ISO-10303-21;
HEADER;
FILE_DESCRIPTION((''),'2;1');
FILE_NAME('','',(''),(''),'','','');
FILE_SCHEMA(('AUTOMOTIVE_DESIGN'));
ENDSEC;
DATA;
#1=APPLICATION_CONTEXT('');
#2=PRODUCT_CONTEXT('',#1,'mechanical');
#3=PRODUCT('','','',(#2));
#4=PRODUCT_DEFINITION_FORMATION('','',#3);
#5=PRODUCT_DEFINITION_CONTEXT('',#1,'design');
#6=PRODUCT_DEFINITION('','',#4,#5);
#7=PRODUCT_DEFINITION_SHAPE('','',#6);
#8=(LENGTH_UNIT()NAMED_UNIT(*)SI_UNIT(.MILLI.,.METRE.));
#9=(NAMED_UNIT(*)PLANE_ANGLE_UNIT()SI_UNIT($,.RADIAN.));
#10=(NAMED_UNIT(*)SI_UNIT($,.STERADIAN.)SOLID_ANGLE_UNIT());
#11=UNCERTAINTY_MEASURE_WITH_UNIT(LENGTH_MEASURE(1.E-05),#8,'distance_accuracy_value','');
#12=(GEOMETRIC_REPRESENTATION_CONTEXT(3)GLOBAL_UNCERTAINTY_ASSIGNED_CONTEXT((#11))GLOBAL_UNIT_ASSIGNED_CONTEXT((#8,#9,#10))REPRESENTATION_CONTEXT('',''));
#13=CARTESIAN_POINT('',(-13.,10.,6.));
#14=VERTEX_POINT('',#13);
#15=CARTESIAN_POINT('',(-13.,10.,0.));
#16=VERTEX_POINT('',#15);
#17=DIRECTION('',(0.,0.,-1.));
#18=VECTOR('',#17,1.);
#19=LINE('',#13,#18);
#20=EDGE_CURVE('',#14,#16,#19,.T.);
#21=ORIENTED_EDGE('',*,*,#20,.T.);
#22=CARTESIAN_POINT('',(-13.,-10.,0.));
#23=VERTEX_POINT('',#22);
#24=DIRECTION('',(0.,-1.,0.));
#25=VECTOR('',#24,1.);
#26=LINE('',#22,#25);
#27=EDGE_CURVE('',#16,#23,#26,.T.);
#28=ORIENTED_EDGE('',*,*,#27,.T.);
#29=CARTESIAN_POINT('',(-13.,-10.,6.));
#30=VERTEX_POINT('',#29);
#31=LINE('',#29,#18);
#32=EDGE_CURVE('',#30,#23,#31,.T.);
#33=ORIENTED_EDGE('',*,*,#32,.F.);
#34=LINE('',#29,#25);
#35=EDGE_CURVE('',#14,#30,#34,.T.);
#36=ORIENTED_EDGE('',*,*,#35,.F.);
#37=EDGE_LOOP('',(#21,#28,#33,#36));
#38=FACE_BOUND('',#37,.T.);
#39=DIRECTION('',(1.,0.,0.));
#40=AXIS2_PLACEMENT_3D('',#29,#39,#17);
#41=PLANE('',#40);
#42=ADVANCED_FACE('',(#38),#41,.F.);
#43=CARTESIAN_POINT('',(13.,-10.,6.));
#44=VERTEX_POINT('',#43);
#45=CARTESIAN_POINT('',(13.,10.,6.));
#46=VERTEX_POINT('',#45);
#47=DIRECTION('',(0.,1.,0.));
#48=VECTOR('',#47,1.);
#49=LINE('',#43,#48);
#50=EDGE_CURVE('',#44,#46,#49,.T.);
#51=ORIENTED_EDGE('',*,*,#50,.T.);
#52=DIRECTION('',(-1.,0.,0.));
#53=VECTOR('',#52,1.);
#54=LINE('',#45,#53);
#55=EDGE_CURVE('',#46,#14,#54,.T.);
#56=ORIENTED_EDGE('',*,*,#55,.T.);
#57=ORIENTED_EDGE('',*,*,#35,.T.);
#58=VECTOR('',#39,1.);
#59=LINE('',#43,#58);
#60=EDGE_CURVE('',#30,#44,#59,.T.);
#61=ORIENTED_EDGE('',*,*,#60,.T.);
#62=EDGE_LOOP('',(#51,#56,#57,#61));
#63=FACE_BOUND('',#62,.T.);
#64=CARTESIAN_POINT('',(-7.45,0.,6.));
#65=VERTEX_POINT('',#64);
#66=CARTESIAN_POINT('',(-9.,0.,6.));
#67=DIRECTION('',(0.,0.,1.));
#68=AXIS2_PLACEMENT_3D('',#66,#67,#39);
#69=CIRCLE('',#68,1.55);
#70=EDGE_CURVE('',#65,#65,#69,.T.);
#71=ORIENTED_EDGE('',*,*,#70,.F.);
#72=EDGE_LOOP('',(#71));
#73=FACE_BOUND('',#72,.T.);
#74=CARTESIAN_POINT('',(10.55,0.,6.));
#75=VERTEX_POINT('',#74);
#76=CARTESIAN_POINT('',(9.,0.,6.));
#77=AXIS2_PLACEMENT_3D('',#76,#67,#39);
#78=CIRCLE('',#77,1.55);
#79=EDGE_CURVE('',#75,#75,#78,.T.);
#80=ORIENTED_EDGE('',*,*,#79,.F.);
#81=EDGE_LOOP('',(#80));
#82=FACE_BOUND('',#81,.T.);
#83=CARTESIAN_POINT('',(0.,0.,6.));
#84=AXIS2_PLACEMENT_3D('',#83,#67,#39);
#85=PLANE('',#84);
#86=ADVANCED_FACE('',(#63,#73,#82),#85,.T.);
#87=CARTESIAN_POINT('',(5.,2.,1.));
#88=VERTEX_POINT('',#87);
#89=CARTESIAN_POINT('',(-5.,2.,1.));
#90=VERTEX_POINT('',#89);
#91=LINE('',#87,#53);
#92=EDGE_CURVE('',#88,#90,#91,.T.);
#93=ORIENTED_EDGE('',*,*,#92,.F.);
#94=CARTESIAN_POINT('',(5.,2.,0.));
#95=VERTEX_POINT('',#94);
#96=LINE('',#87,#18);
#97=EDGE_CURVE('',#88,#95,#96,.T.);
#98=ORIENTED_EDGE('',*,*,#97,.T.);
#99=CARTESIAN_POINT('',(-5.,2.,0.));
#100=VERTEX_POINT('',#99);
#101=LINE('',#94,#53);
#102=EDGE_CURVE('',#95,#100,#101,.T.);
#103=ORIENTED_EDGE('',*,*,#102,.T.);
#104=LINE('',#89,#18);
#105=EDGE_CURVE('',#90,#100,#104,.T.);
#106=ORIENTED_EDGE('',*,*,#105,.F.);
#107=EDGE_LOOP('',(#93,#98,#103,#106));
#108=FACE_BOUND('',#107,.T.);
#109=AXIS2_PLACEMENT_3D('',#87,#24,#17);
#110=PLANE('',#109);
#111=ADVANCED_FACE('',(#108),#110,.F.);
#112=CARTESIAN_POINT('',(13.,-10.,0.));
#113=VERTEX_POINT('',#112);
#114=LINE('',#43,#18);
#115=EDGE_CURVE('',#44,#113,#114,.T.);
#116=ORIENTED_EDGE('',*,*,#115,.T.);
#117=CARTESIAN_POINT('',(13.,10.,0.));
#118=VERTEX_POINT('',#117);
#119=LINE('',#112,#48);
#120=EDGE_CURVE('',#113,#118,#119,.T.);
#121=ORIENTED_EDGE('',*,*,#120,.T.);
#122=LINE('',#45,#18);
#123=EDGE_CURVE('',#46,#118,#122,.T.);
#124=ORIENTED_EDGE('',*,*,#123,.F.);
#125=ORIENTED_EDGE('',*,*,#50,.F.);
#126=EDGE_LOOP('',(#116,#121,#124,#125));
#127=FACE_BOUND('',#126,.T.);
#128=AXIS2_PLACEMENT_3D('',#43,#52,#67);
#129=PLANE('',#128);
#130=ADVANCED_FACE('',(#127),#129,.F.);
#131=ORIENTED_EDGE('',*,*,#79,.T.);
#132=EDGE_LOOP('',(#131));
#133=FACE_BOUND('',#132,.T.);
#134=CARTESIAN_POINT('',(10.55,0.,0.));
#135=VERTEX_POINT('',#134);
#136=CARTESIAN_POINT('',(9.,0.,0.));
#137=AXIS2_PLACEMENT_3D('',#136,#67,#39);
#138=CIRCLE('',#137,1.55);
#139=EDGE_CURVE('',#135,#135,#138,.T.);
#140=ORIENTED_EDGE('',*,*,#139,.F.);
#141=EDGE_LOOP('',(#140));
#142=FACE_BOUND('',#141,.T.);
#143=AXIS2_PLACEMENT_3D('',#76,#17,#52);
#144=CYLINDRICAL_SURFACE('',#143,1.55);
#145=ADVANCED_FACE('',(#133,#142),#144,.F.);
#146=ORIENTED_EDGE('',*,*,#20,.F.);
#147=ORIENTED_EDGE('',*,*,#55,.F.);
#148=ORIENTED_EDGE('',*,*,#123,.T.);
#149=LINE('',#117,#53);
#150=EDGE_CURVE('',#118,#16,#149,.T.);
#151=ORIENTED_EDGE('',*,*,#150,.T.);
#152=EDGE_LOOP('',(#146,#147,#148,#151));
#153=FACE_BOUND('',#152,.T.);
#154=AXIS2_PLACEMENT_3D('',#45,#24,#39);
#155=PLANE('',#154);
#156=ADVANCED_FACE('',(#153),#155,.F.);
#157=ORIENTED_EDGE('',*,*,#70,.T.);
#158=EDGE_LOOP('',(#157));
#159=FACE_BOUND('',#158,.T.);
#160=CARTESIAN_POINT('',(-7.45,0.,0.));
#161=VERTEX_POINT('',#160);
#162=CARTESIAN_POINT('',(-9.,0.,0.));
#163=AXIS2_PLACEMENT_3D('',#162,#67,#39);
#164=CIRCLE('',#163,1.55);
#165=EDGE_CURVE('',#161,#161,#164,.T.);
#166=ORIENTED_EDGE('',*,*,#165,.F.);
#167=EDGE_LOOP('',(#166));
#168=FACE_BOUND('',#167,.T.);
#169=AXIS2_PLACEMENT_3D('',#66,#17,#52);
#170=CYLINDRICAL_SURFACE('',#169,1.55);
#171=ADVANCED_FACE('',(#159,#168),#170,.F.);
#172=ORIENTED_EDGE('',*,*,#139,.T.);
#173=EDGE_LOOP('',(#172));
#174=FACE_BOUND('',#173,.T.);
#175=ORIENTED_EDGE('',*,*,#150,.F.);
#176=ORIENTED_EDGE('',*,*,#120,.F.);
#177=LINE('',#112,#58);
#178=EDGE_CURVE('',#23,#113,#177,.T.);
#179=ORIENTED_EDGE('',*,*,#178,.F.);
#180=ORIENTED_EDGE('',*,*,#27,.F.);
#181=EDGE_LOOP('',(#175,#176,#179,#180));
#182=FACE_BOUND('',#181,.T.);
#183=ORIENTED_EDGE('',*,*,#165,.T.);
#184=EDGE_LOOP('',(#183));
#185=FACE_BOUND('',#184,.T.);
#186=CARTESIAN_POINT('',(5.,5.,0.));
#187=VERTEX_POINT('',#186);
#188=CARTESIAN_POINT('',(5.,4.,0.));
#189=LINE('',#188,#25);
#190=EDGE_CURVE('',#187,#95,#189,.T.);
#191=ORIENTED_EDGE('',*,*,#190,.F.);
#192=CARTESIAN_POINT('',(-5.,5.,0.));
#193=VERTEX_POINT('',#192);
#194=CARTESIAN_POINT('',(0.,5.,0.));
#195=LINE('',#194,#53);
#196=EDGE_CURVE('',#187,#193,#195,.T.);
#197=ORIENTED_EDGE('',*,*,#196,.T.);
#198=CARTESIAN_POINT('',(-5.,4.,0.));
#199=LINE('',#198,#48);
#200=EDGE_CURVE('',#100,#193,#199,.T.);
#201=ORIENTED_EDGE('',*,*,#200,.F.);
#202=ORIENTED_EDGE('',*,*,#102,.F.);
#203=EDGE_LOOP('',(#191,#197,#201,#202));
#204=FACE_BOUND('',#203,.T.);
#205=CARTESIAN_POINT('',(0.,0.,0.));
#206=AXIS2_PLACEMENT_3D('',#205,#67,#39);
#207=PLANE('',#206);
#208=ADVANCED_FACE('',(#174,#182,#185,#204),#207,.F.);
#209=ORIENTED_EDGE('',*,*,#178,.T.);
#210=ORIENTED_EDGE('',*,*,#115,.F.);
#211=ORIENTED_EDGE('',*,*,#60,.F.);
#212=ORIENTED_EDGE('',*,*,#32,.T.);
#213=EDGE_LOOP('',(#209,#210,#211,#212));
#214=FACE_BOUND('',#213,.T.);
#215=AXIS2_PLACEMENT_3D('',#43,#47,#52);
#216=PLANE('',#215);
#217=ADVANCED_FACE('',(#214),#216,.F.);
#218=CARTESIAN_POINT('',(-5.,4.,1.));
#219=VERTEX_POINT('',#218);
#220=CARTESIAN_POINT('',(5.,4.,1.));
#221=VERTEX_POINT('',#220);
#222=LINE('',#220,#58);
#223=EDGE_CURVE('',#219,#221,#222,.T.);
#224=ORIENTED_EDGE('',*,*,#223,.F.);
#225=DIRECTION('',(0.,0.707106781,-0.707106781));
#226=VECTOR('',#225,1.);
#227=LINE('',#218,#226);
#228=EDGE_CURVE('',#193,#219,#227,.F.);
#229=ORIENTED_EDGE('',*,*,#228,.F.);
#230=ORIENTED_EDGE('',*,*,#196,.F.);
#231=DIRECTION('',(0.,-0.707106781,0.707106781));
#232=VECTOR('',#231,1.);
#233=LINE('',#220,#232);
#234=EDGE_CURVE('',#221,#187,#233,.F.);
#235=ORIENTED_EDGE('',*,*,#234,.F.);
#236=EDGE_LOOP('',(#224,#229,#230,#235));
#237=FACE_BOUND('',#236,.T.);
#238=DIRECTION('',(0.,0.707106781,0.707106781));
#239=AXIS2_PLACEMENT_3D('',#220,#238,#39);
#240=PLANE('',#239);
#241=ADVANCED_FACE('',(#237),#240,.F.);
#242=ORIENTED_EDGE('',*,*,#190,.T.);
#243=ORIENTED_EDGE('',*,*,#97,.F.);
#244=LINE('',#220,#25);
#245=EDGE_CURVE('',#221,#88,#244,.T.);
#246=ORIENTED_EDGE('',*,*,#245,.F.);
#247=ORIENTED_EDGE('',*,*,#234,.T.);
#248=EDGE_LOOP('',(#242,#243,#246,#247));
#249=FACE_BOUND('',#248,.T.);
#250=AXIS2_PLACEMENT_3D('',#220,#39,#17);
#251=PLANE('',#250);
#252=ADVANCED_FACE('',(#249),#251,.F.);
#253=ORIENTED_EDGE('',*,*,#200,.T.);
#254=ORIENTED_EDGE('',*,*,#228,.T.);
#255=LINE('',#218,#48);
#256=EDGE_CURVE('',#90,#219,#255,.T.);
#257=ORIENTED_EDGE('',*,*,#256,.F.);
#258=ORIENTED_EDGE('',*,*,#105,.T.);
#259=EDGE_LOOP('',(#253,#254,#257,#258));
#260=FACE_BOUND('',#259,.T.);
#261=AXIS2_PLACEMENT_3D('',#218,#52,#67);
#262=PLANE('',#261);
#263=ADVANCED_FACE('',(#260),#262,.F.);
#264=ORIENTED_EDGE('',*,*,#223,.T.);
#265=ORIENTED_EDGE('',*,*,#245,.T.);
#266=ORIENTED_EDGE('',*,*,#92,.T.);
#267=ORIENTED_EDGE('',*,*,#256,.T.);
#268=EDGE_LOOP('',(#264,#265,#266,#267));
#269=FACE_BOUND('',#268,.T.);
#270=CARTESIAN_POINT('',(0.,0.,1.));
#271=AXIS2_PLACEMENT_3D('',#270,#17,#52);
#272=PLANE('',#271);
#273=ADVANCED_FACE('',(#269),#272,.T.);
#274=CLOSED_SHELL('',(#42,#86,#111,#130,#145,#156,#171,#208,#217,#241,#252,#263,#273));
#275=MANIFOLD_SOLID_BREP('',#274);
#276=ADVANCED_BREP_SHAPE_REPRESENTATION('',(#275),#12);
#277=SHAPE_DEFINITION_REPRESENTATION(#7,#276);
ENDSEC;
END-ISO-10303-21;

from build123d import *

# Parameters (mm, degrees)
SKETCH1_W           = 26
SKETCH1_H           = 20
SKETCH1_R           = 1.55
BOSS_EXTRUDE1_DEPTH = 6
SKETCH4_W           = 10
SKETCH4_H           = 2
CUT_EXTRUDE3_DEPTH  = 1
CHAMFER1_SIZE       = 1


with BuildPart() as part:
    # Sketch1 → Boss-Extrude1 (new body)
    with BuildSketch(Plane.XY):
        Rectangle(SKETCH1_W, SKETCH1_H)
        with Locations((9, 0)):
            Circle(SKETCH1_R, mode=Mode.SUBTRACT)
        with Locations((-9, 0)):
            Circle(SKETCH1_R, mode=Mode.SUBTRACT)
    extrude(amount=BOSS_EXTRUDE1_DEPTH)

    # Sketch4 → Cut-Extrude3 (cut)
    with BuildSketch(Plane(origin=(0, 0, 0), x_dir=(-1, 0, 0), z_dir=(0, 0, -1))):
        with Locations((0, 3)):
            Rectangle(SKETCH4_W, SKETCH4_H)
    extrude(amount=-CUT_EXTRUDE3_DEPTH, mode=Mode.SUBTRACT)

    # Chamfer1
    chamfer1_edges = [part.edges().sort_by_distance(p)[0] for p in [
        (0, 4, 0),
    ]]
    chamfer(chamfer1_edges, length=CHAMFER1_SIZE - 0.0001)  # a hair under: the kernel refuses the full size


solid = part.part
